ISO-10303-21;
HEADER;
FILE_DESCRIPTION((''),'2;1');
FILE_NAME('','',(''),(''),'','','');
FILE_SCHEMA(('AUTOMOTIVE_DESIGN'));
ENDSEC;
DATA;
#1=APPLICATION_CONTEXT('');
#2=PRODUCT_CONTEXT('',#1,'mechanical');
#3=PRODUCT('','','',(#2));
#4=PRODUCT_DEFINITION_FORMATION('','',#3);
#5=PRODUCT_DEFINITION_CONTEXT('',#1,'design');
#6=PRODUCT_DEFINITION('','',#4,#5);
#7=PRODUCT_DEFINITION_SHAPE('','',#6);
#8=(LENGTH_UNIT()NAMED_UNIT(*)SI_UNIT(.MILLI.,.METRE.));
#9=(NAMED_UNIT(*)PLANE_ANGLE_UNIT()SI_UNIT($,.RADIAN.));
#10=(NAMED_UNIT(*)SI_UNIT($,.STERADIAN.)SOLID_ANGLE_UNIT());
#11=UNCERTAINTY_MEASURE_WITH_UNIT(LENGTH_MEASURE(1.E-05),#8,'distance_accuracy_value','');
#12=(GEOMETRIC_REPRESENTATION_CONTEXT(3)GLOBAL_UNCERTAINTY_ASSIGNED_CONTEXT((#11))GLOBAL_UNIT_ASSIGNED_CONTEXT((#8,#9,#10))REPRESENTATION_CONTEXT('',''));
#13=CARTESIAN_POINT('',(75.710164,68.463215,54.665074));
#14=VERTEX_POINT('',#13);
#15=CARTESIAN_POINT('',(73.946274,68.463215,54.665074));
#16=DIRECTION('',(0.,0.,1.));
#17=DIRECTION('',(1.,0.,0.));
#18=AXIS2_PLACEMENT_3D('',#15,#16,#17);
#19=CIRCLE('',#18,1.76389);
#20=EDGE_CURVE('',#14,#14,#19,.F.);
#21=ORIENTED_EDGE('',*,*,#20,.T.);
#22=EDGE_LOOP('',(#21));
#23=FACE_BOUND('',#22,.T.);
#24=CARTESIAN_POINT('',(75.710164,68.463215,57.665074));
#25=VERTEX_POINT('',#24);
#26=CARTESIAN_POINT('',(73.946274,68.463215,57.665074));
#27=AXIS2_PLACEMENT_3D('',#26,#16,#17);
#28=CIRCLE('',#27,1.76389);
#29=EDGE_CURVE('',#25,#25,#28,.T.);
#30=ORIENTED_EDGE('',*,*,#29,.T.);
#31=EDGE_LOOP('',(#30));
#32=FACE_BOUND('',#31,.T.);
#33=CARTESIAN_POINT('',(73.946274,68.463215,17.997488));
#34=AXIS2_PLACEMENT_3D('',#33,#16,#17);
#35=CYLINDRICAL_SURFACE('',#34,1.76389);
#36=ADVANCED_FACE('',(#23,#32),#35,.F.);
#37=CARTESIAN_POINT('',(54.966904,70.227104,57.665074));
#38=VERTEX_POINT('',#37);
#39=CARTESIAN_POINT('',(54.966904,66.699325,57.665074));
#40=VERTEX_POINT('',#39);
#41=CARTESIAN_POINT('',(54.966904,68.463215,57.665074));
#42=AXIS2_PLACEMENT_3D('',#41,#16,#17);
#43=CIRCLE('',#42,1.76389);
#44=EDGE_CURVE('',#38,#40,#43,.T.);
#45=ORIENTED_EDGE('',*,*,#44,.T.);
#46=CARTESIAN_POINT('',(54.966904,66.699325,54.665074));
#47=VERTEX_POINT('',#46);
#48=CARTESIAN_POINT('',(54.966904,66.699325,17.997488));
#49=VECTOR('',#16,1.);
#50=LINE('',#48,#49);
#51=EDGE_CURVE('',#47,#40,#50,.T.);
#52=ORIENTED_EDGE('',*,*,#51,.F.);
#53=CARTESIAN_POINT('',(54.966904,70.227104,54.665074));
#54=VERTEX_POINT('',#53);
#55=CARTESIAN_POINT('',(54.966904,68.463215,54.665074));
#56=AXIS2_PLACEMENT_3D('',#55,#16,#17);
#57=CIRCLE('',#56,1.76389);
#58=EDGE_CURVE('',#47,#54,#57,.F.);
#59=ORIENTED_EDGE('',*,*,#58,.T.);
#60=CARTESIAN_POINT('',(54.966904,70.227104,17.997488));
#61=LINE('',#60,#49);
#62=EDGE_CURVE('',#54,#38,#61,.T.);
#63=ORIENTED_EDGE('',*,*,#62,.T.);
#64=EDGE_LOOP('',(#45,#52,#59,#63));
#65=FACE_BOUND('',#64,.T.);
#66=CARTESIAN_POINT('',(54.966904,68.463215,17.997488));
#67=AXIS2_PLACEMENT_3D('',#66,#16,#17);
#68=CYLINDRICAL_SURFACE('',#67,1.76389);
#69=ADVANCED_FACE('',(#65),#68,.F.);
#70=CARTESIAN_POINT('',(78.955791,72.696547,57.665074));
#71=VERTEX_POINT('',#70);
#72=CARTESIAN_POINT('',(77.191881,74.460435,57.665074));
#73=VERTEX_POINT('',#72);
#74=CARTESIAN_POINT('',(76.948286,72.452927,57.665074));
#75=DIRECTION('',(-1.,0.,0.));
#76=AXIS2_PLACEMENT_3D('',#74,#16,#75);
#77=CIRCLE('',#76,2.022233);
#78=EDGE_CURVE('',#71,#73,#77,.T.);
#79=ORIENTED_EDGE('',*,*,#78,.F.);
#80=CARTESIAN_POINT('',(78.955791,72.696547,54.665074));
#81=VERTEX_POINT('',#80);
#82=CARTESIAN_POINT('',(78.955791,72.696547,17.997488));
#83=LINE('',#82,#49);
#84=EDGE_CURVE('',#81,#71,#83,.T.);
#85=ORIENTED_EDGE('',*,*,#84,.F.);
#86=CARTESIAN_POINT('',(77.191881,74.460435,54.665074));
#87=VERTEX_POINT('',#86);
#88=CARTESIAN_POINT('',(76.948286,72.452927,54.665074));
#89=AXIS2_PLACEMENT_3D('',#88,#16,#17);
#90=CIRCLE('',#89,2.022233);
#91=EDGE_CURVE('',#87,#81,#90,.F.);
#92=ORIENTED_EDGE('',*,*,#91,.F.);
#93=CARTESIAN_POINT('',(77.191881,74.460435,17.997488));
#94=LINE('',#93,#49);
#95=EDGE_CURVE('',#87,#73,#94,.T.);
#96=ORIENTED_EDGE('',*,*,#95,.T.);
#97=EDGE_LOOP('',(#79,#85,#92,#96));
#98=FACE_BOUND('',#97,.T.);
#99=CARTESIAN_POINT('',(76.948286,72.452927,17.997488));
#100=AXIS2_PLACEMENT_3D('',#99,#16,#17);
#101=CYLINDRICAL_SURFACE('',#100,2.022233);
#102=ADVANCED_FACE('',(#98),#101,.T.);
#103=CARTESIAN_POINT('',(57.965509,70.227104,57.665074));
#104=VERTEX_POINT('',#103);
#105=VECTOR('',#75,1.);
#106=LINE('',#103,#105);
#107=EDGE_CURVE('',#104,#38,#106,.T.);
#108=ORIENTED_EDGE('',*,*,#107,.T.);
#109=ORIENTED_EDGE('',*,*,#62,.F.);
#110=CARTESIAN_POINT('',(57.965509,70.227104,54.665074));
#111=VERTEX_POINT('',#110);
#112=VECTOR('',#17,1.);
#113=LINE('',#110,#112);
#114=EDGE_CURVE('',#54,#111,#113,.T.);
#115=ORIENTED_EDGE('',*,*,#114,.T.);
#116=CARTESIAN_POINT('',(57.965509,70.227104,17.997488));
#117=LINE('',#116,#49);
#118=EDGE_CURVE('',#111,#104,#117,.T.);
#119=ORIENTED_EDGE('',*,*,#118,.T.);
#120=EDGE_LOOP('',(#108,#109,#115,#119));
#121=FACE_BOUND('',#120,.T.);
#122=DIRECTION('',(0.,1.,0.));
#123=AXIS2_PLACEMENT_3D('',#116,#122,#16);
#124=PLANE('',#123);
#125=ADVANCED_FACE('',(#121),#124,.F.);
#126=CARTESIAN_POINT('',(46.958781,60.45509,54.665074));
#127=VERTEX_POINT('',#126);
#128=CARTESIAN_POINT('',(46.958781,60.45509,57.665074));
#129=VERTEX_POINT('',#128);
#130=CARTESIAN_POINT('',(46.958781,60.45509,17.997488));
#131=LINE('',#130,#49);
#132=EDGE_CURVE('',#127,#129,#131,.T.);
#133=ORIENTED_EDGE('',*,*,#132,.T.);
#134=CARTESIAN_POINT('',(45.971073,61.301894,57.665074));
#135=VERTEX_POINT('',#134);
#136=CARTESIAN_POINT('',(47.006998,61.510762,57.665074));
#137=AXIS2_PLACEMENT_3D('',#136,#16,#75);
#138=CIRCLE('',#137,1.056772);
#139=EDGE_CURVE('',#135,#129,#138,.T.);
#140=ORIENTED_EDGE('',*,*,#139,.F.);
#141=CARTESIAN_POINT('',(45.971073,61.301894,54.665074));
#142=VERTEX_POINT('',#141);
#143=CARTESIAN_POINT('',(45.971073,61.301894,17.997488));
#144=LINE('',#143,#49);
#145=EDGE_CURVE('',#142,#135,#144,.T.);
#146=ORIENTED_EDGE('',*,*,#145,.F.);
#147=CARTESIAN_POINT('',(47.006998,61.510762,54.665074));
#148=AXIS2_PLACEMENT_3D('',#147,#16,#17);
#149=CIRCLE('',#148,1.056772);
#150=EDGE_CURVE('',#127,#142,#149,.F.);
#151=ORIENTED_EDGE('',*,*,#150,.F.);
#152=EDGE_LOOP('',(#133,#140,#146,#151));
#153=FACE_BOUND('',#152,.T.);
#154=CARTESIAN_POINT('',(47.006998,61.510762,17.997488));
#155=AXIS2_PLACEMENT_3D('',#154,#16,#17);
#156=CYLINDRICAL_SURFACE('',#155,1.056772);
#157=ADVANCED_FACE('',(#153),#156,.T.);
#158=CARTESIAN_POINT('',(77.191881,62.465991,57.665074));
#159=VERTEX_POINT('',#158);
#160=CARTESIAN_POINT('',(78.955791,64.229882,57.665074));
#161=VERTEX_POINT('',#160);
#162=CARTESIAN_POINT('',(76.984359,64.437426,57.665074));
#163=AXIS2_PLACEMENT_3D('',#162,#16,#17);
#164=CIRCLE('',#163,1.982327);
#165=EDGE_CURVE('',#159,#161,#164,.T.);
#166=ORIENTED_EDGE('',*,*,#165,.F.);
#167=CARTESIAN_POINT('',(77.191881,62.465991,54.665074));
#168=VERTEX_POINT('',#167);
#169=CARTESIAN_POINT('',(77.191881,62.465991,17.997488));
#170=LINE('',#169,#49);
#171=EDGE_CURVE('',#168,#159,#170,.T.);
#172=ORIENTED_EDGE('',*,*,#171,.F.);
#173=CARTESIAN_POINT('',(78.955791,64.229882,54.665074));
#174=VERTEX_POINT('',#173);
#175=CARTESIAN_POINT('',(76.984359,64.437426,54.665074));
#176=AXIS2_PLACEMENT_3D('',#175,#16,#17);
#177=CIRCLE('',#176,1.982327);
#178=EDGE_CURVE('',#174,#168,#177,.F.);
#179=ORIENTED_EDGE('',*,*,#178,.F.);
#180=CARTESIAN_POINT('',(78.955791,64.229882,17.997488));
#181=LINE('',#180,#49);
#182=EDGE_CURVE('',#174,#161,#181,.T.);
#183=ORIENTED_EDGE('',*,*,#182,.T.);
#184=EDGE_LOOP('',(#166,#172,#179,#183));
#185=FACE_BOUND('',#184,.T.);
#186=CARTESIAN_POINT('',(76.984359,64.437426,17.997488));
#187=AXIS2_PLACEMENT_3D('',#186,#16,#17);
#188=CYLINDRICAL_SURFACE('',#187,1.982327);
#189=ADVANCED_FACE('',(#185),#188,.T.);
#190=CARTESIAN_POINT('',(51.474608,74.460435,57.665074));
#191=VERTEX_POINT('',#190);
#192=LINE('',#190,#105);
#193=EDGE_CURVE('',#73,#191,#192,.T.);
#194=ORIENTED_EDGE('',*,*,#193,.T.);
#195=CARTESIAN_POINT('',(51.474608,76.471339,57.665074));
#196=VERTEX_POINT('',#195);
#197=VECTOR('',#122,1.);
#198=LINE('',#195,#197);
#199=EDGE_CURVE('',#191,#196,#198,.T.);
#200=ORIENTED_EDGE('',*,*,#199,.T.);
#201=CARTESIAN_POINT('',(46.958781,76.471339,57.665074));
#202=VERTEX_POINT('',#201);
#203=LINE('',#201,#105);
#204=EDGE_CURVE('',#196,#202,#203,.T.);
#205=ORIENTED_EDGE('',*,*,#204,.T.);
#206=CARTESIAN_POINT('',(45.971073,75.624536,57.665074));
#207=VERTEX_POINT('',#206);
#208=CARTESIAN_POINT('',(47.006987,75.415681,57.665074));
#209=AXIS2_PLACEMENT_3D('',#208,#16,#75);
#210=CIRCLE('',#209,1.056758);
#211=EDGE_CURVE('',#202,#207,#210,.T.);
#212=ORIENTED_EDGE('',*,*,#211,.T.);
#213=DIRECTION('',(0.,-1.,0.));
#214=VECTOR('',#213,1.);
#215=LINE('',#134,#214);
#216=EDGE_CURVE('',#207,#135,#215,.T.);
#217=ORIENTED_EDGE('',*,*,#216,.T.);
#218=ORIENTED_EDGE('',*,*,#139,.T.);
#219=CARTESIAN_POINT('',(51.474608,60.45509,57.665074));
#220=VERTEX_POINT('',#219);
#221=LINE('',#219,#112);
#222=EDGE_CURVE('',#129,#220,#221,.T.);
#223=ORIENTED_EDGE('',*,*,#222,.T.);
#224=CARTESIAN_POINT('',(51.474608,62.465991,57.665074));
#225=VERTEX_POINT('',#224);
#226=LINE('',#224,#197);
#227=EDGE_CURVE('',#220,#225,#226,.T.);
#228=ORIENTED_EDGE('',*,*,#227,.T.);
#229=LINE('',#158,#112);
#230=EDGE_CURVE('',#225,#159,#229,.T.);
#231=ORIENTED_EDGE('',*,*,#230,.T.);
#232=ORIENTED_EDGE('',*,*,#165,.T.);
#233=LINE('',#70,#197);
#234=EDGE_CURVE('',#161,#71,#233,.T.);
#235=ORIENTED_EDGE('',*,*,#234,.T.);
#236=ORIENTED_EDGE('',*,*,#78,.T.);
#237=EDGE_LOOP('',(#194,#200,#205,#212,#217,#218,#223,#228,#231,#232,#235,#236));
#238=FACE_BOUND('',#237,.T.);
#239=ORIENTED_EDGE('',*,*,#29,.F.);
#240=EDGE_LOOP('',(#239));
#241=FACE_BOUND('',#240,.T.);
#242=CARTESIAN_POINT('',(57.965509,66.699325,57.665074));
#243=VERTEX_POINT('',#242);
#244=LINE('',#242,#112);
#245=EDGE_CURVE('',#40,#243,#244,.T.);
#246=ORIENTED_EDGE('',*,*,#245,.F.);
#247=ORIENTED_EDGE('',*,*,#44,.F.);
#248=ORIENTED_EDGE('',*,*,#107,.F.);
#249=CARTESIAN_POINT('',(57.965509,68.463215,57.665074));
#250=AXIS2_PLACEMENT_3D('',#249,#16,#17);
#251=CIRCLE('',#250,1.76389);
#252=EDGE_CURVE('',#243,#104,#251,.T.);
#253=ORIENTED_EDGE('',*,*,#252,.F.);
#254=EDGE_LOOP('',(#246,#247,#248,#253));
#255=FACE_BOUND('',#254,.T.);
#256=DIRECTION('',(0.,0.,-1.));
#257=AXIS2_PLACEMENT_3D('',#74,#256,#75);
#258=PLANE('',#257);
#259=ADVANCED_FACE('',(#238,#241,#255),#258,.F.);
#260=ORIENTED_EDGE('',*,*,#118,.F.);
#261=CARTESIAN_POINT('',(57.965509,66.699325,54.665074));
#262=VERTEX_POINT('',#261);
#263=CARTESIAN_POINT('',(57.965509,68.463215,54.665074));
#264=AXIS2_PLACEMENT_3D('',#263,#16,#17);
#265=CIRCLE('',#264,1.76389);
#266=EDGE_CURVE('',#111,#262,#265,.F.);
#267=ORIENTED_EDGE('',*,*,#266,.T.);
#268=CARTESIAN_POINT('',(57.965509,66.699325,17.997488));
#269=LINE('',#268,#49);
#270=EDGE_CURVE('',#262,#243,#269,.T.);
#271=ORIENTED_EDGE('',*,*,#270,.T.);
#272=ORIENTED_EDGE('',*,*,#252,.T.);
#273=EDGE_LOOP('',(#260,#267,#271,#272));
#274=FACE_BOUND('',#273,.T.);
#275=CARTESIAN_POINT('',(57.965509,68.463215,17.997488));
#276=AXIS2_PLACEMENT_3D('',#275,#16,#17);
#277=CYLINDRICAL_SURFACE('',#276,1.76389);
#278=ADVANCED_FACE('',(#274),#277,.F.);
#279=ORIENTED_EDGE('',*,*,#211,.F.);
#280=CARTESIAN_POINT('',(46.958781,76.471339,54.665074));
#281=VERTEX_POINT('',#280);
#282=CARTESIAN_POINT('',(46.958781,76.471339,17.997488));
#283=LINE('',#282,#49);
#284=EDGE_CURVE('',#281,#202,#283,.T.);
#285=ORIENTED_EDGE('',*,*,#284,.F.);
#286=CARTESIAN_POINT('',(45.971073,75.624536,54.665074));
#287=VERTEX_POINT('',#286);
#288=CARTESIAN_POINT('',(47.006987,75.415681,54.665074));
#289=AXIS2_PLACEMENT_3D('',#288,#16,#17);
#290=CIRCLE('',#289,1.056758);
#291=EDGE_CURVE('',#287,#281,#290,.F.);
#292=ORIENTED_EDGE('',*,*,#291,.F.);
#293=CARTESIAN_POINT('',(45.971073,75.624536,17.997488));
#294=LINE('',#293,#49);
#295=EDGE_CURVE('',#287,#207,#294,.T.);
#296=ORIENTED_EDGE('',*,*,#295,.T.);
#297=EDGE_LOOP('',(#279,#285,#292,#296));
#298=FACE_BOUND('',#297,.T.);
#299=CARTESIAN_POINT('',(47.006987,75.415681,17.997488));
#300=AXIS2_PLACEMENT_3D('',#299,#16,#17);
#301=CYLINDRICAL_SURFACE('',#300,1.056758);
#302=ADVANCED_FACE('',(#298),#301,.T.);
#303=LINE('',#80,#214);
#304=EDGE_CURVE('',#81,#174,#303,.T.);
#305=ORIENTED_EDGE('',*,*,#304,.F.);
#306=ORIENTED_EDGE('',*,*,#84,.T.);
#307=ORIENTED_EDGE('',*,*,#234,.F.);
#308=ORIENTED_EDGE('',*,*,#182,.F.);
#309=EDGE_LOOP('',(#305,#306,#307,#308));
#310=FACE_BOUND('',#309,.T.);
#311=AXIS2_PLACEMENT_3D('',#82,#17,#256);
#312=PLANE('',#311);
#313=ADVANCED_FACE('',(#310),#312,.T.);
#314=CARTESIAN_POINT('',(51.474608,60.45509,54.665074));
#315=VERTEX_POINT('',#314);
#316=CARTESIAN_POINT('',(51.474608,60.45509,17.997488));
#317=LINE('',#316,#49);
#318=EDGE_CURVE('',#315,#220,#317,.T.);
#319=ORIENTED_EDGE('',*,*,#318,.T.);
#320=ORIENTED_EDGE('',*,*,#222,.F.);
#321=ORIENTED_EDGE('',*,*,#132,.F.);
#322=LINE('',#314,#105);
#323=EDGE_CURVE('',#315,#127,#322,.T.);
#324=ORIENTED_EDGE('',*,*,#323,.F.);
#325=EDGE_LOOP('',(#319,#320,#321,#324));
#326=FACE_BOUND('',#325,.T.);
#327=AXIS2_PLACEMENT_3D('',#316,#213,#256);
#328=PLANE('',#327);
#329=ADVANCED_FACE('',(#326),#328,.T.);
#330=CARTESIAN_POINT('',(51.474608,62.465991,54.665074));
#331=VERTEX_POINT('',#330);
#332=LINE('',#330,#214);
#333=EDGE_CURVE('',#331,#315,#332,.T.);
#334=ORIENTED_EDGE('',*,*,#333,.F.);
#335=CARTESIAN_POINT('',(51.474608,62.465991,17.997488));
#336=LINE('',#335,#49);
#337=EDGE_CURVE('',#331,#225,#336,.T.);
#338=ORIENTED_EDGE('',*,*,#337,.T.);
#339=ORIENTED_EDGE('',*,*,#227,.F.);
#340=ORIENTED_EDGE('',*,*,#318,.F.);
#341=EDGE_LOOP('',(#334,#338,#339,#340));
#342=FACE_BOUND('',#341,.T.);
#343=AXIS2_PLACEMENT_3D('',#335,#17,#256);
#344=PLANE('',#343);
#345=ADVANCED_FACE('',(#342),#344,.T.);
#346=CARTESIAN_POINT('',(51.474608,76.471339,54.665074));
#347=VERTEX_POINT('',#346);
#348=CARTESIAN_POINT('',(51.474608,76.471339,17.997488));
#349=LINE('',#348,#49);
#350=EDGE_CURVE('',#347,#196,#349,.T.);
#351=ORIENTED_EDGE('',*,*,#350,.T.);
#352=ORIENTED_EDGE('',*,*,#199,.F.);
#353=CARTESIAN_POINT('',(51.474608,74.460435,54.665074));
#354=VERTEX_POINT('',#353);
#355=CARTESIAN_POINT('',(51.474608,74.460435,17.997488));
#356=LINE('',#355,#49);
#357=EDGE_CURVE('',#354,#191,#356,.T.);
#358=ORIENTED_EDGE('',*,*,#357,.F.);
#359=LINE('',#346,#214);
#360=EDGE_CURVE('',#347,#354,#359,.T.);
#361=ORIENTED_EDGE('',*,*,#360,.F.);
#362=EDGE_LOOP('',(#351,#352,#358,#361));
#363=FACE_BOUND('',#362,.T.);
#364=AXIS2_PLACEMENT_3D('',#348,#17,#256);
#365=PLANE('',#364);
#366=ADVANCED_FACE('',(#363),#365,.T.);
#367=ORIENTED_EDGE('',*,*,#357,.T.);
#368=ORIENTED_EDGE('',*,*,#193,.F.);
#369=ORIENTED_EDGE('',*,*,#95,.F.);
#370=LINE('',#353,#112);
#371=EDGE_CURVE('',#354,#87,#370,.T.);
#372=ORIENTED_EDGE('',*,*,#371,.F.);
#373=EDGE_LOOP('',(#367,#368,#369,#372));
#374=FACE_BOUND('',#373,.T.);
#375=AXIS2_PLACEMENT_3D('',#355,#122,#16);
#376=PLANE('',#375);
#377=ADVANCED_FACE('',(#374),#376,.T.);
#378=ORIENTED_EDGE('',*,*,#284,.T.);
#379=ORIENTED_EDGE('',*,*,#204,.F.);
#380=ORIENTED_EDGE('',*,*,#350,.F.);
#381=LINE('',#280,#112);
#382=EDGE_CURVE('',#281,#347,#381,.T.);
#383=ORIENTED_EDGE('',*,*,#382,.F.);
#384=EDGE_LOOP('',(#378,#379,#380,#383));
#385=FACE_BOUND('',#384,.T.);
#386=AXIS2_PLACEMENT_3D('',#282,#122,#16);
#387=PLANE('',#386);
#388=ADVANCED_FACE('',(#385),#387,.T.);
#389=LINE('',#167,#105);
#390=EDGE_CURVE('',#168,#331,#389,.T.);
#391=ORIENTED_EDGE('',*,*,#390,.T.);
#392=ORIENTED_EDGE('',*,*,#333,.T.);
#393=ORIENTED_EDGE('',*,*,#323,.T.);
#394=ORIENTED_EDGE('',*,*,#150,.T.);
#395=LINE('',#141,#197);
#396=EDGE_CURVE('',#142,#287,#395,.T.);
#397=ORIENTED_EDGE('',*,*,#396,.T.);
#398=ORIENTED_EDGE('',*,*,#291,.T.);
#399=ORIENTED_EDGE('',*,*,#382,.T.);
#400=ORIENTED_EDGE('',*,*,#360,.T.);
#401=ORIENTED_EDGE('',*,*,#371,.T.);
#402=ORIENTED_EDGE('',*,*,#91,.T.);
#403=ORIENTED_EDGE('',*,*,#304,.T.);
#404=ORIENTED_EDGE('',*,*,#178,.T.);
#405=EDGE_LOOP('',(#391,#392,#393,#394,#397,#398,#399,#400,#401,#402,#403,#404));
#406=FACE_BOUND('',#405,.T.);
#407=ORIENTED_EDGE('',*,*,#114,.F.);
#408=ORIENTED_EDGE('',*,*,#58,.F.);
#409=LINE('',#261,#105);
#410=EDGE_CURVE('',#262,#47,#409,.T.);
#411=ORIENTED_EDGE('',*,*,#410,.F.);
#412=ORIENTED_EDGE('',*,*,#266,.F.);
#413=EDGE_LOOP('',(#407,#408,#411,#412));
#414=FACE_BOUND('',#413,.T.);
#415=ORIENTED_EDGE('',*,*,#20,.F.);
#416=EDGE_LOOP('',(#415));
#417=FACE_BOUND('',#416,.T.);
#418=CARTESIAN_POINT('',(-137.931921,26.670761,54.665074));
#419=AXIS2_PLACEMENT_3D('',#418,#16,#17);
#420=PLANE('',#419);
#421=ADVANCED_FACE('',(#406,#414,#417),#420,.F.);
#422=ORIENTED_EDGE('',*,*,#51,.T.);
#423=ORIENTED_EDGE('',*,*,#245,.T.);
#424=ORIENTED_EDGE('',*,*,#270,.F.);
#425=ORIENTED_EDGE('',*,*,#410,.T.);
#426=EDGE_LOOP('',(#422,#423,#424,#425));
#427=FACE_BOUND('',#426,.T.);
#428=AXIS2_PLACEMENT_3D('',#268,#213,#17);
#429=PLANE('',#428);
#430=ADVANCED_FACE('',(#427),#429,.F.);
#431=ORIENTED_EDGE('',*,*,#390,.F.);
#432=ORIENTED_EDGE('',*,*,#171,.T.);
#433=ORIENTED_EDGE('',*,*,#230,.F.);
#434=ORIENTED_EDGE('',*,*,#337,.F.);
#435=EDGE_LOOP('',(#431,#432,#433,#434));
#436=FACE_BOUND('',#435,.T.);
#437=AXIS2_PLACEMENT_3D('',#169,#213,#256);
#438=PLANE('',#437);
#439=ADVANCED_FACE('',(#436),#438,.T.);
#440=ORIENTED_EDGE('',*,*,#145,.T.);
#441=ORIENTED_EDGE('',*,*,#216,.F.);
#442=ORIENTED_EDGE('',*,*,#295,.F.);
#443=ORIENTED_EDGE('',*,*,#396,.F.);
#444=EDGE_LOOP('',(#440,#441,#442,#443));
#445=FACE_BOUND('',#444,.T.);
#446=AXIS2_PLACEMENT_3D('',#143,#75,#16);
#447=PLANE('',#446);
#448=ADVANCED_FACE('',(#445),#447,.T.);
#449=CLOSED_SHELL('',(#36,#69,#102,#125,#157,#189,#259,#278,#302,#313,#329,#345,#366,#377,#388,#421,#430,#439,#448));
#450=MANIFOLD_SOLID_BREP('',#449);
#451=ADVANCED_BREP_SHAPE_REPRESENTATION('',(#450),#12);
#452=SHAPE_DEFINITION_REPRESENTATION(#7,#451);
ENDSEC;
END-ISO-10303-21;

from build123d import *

# Parameters (mm, degrees)
ROBOTCHASSIS1_START = 54.665073828
ROBOTCHASSIS1_DEPTH = 3.000000026
SKETCH1_R           = 1.763889566
BOSS_EXTRUDE2_DEPTH = 3.000000026


# Read off the part's stored shape, not the designer's step: RobotChassis1
with BuildPart() as part:
    # RobotChassis1 outline → RobotChassis1 (new body)
    with BuildSketch(Plane.XY.offset(ROBOTCHASSIS1_START)):
        Polygon((78.391484289, 73.860644449), (78.215099244, 74.037033219), (78.038699298, 74.142797936), (77.826834588, 74.248562653), (77.615297704, 74.354670097), (77.403775721, 74.424951424), (77.191881209, 74.460434814), (51.474607854, 74.460434814), (51.474607854, 76.471339066), (46.958781152, 76.471339066), (46.782381206, 76.435855676), (46.605996161, 76.400715013), (46.46509078, 76.330094684), (46.323842673, 76.224326242), (46.182937293, 76.118561525), (46.11232069, 75.977313419), (46.006552248, 75.800920923), (45.971072583, 75.624535878), (45.971072583, 61.301893641), (46.006552248, 61.125501145), (46.11232069, 60.9491161), (46.182937293, 60.807867993), (46.323842673, 60.702103276), (46.46509078, 60.59633856), (46.605996161, 60.525714506), (46.782381206, 60.490231116), (46.958781152, 60.455090453), (51.474607854, 60.455090453), (51.474607854, 62.46599098), (77.191881209, 62.46599098), (77.403775721, 62.501131643), (77.826834588, 62.64237975), (78.038699298, 62.78328513), (78.215099244, 62.889392574), (78.391484289, 63.030297954), (78.53238967, 63.206686725), (78.673637776, 63.383075495), (78.779391317, 63.594947655), (78.920654326, 64.018006523), (78.955791264, 64.229882408), (78.955791264, 72.69654711), (78.920654326, 72.908076544), (78.850022822, 73.119948704), (78.779391317, 73.331478138), (78.673637776, 73.507866908), (78.53238967, 73.719396342), align=None)
        Polygon((58.177388578, 70.19161721), (58.388910561, 70.156476547), (58.600447445, 70.085852493), (58.77683249, 70.01522844), (58.953217535, 69.909463723), (59.12960258, 69.768562068), (59.270850687, 69.627310236), (59.412098794, 69.45091774), (59.517867236, 69.274532695), (59.58849874, 69.063003261), (59.658772616, 68.886614491), (59.694252281, 68.67474233), (59.729404121, 68.463212897), (59.694252281, 68.251340736), (59.658772616, 68.039811303), (59.58849874, 67.828281869), (59.517867236, 67.651893098), (59.412098794, 67.475504328), (59.270850687, 67.299111832), (59.12960258, 67.157867451), (58.953217535, 67.016619344), (58.77683249, 66.910854627), (58.600447445, 66.840230574), (58.388910561, 66.769949247), (58.177388578, 66.734465857), (57.965508967, 66.699325193), (54.966903596, 66.699325193), (54.755366712, 66.734465857), (54.543502002, 66.769949247), (54.331965118, 66.840230574), (54.155580072, 66.910854627), (53.979195027, 67.016619344), (53.802795081, 67.157867451), (53.661546974, 67.299111832), (53.520641594, 67.475504328), (53.414873152, 67.651893098), (53.344256549, 67.828281869), (53.273639946, 68.039811303), (53.238488107, 68.251340736), (53.203008442, 68.463212897), (53.238488107, 68.67474233), (53.273639946, 68.886614491), (53.344256549, 69.063003261), (53.414873152, 69.274532695), (53.520641594, 69.45091774), (53.661546974, 69.627310236), (53.802795081, 69.768562068), (53.979195027, 69.909463723), (54.155580072, 70.01522844), (54.331965118, 70.085852493), (54.543502002, 70.156476547), (54.755366712, 70.19161721), (54.966903596, 70.227104325), (57.965508967, 70.227104325), align=None, mode=Mode.SUBTRACT)
        Polygon((74.581555395, 70.085852493), (74.79309228, 70.01522844), (74.969462423, 69.909463723), (75.11071053, 69.768562068), (75.287110477, 69.627310236), (75.49863246, 69.274532695), (75.604400902, 69.063003261), (75.675017505, 68.886614491), (75.710169344, 68.67474233), (75.710169344, 68.251340736), (75.675017505, 68.039811303), (75.604400902, 67.828281869), (75.287110477, 67.299111832), (75.11071053, 67.157867451), (74.969462423, 67.016619344), (74.79309228, 66.910854627), (74.581555395, 66.840230574), (74.369675784, 66.769949247), (74.158153801, 66.734465857), (73.94627419, 66.699325193), (73.769889145, 66.734465857), (73.558352261, 66.769949247), (73.346830278, 66.840230574), (73.134950667, 66.910854627), (72.958565621, 67.016619344), (72.817660241, 67.157867451), (72.641275196, 67.299111832), (72.535164027, 67.475504328), (72.323627143, 67.828281869), (72.25301054, 68.039811303), (72.217873602, 68.251340736), (72.217873602, 68.67474233), (72.25301054, 68.886614491), (72.323627143, 69.063003261), (72.429395585, 69.274532695), (72.535164027, 69.45091774), (72.641275196, 69.627310236), (72.817660241, 69.768562068), (72.958565621, 69.909463723), (73.134950667, 70.01522844), (73.346830278, 70.085852493), (73.558352261, 70.156476547), (73.769889145, 70.19161721), (73.94627419, 70.227104325), (74.158153801, 70.19161721), (74.369675784, 70.156476547), align=None, mode=Mode.SUBTRACT)
    extrude(amount=ROBOTCHASSIS1_DEPTH)


with BuildPart() as body_2:
    # Sketch1 → Boss-Extrude2 (new body)
    with BuildSketch(Plane.XY.offset(57.665073854)):
        with BuildLine():
            Line((51.474607854, 74.460434814), (77.191881209, 74.460434814))
            ThreePointArc((77.191881209, 74.460434814), (78.378212032, 73.882870615), (78.955791264, 72.69654711))
            Line((78.955791264, 72.69654711), (78.955791264, 64.229882408))
            ThreePointArc((78.955791264, 64.229882408), (78.386068245, 63.035701388), (77.191881209, 62.46599098))
            Line((77.191881209, 62.46599098), (51.474607854, 62.46599098))
            Line((51.474607854, 62.46599098), (51.474607854, 60.455090453))
            Line((51.474607854, 60.455090453), (46.958781152, 60.455090453))
            ThreePointArc((46.958781152, 60.455090453), (46.319168008, 60.708479372), (45.971072583, 61.301893641))
            Line((45.971072583, 61.301893641), (45.971072583, 75.624535878))
            ThreePointArc((45.971072583, 75.624535878), (46.319165637, 76.217952912), (46.958781152, 76.471339066))
            Line((46.958781152, 76.471339066), (51.474607854, 76.471339066))
            Line((51.474607854, 76.471339066), (51.474607854, 74.460434814))
        make_face()
        with Locations((73.94627419, 68.463214759)):
            Circle(SKETCH1_R, mode=Mode.SUBTRACT)
        with BuildLine():
            Line((57.965508967, 66.699325193), (54.966903596, 66.699325193))
            ThreePointArc((54.966903596, 66.699325193), (53.20301403, 68.463214759), (54.966903596, 70.227104325))
            Line((54.966903596, 70.227104325), (57.965508967, 70.227104325))
            ThreePointArc((57.965508967, 70.227104325), (59.729398533, 68.463214759), (57.965508967, 66.699325193))
        make_face(mode=Mode.SUBTRACT)
    extrude(amount=-BOSS_EXTRUDE2_DEPTH)


solid = body_2.part
